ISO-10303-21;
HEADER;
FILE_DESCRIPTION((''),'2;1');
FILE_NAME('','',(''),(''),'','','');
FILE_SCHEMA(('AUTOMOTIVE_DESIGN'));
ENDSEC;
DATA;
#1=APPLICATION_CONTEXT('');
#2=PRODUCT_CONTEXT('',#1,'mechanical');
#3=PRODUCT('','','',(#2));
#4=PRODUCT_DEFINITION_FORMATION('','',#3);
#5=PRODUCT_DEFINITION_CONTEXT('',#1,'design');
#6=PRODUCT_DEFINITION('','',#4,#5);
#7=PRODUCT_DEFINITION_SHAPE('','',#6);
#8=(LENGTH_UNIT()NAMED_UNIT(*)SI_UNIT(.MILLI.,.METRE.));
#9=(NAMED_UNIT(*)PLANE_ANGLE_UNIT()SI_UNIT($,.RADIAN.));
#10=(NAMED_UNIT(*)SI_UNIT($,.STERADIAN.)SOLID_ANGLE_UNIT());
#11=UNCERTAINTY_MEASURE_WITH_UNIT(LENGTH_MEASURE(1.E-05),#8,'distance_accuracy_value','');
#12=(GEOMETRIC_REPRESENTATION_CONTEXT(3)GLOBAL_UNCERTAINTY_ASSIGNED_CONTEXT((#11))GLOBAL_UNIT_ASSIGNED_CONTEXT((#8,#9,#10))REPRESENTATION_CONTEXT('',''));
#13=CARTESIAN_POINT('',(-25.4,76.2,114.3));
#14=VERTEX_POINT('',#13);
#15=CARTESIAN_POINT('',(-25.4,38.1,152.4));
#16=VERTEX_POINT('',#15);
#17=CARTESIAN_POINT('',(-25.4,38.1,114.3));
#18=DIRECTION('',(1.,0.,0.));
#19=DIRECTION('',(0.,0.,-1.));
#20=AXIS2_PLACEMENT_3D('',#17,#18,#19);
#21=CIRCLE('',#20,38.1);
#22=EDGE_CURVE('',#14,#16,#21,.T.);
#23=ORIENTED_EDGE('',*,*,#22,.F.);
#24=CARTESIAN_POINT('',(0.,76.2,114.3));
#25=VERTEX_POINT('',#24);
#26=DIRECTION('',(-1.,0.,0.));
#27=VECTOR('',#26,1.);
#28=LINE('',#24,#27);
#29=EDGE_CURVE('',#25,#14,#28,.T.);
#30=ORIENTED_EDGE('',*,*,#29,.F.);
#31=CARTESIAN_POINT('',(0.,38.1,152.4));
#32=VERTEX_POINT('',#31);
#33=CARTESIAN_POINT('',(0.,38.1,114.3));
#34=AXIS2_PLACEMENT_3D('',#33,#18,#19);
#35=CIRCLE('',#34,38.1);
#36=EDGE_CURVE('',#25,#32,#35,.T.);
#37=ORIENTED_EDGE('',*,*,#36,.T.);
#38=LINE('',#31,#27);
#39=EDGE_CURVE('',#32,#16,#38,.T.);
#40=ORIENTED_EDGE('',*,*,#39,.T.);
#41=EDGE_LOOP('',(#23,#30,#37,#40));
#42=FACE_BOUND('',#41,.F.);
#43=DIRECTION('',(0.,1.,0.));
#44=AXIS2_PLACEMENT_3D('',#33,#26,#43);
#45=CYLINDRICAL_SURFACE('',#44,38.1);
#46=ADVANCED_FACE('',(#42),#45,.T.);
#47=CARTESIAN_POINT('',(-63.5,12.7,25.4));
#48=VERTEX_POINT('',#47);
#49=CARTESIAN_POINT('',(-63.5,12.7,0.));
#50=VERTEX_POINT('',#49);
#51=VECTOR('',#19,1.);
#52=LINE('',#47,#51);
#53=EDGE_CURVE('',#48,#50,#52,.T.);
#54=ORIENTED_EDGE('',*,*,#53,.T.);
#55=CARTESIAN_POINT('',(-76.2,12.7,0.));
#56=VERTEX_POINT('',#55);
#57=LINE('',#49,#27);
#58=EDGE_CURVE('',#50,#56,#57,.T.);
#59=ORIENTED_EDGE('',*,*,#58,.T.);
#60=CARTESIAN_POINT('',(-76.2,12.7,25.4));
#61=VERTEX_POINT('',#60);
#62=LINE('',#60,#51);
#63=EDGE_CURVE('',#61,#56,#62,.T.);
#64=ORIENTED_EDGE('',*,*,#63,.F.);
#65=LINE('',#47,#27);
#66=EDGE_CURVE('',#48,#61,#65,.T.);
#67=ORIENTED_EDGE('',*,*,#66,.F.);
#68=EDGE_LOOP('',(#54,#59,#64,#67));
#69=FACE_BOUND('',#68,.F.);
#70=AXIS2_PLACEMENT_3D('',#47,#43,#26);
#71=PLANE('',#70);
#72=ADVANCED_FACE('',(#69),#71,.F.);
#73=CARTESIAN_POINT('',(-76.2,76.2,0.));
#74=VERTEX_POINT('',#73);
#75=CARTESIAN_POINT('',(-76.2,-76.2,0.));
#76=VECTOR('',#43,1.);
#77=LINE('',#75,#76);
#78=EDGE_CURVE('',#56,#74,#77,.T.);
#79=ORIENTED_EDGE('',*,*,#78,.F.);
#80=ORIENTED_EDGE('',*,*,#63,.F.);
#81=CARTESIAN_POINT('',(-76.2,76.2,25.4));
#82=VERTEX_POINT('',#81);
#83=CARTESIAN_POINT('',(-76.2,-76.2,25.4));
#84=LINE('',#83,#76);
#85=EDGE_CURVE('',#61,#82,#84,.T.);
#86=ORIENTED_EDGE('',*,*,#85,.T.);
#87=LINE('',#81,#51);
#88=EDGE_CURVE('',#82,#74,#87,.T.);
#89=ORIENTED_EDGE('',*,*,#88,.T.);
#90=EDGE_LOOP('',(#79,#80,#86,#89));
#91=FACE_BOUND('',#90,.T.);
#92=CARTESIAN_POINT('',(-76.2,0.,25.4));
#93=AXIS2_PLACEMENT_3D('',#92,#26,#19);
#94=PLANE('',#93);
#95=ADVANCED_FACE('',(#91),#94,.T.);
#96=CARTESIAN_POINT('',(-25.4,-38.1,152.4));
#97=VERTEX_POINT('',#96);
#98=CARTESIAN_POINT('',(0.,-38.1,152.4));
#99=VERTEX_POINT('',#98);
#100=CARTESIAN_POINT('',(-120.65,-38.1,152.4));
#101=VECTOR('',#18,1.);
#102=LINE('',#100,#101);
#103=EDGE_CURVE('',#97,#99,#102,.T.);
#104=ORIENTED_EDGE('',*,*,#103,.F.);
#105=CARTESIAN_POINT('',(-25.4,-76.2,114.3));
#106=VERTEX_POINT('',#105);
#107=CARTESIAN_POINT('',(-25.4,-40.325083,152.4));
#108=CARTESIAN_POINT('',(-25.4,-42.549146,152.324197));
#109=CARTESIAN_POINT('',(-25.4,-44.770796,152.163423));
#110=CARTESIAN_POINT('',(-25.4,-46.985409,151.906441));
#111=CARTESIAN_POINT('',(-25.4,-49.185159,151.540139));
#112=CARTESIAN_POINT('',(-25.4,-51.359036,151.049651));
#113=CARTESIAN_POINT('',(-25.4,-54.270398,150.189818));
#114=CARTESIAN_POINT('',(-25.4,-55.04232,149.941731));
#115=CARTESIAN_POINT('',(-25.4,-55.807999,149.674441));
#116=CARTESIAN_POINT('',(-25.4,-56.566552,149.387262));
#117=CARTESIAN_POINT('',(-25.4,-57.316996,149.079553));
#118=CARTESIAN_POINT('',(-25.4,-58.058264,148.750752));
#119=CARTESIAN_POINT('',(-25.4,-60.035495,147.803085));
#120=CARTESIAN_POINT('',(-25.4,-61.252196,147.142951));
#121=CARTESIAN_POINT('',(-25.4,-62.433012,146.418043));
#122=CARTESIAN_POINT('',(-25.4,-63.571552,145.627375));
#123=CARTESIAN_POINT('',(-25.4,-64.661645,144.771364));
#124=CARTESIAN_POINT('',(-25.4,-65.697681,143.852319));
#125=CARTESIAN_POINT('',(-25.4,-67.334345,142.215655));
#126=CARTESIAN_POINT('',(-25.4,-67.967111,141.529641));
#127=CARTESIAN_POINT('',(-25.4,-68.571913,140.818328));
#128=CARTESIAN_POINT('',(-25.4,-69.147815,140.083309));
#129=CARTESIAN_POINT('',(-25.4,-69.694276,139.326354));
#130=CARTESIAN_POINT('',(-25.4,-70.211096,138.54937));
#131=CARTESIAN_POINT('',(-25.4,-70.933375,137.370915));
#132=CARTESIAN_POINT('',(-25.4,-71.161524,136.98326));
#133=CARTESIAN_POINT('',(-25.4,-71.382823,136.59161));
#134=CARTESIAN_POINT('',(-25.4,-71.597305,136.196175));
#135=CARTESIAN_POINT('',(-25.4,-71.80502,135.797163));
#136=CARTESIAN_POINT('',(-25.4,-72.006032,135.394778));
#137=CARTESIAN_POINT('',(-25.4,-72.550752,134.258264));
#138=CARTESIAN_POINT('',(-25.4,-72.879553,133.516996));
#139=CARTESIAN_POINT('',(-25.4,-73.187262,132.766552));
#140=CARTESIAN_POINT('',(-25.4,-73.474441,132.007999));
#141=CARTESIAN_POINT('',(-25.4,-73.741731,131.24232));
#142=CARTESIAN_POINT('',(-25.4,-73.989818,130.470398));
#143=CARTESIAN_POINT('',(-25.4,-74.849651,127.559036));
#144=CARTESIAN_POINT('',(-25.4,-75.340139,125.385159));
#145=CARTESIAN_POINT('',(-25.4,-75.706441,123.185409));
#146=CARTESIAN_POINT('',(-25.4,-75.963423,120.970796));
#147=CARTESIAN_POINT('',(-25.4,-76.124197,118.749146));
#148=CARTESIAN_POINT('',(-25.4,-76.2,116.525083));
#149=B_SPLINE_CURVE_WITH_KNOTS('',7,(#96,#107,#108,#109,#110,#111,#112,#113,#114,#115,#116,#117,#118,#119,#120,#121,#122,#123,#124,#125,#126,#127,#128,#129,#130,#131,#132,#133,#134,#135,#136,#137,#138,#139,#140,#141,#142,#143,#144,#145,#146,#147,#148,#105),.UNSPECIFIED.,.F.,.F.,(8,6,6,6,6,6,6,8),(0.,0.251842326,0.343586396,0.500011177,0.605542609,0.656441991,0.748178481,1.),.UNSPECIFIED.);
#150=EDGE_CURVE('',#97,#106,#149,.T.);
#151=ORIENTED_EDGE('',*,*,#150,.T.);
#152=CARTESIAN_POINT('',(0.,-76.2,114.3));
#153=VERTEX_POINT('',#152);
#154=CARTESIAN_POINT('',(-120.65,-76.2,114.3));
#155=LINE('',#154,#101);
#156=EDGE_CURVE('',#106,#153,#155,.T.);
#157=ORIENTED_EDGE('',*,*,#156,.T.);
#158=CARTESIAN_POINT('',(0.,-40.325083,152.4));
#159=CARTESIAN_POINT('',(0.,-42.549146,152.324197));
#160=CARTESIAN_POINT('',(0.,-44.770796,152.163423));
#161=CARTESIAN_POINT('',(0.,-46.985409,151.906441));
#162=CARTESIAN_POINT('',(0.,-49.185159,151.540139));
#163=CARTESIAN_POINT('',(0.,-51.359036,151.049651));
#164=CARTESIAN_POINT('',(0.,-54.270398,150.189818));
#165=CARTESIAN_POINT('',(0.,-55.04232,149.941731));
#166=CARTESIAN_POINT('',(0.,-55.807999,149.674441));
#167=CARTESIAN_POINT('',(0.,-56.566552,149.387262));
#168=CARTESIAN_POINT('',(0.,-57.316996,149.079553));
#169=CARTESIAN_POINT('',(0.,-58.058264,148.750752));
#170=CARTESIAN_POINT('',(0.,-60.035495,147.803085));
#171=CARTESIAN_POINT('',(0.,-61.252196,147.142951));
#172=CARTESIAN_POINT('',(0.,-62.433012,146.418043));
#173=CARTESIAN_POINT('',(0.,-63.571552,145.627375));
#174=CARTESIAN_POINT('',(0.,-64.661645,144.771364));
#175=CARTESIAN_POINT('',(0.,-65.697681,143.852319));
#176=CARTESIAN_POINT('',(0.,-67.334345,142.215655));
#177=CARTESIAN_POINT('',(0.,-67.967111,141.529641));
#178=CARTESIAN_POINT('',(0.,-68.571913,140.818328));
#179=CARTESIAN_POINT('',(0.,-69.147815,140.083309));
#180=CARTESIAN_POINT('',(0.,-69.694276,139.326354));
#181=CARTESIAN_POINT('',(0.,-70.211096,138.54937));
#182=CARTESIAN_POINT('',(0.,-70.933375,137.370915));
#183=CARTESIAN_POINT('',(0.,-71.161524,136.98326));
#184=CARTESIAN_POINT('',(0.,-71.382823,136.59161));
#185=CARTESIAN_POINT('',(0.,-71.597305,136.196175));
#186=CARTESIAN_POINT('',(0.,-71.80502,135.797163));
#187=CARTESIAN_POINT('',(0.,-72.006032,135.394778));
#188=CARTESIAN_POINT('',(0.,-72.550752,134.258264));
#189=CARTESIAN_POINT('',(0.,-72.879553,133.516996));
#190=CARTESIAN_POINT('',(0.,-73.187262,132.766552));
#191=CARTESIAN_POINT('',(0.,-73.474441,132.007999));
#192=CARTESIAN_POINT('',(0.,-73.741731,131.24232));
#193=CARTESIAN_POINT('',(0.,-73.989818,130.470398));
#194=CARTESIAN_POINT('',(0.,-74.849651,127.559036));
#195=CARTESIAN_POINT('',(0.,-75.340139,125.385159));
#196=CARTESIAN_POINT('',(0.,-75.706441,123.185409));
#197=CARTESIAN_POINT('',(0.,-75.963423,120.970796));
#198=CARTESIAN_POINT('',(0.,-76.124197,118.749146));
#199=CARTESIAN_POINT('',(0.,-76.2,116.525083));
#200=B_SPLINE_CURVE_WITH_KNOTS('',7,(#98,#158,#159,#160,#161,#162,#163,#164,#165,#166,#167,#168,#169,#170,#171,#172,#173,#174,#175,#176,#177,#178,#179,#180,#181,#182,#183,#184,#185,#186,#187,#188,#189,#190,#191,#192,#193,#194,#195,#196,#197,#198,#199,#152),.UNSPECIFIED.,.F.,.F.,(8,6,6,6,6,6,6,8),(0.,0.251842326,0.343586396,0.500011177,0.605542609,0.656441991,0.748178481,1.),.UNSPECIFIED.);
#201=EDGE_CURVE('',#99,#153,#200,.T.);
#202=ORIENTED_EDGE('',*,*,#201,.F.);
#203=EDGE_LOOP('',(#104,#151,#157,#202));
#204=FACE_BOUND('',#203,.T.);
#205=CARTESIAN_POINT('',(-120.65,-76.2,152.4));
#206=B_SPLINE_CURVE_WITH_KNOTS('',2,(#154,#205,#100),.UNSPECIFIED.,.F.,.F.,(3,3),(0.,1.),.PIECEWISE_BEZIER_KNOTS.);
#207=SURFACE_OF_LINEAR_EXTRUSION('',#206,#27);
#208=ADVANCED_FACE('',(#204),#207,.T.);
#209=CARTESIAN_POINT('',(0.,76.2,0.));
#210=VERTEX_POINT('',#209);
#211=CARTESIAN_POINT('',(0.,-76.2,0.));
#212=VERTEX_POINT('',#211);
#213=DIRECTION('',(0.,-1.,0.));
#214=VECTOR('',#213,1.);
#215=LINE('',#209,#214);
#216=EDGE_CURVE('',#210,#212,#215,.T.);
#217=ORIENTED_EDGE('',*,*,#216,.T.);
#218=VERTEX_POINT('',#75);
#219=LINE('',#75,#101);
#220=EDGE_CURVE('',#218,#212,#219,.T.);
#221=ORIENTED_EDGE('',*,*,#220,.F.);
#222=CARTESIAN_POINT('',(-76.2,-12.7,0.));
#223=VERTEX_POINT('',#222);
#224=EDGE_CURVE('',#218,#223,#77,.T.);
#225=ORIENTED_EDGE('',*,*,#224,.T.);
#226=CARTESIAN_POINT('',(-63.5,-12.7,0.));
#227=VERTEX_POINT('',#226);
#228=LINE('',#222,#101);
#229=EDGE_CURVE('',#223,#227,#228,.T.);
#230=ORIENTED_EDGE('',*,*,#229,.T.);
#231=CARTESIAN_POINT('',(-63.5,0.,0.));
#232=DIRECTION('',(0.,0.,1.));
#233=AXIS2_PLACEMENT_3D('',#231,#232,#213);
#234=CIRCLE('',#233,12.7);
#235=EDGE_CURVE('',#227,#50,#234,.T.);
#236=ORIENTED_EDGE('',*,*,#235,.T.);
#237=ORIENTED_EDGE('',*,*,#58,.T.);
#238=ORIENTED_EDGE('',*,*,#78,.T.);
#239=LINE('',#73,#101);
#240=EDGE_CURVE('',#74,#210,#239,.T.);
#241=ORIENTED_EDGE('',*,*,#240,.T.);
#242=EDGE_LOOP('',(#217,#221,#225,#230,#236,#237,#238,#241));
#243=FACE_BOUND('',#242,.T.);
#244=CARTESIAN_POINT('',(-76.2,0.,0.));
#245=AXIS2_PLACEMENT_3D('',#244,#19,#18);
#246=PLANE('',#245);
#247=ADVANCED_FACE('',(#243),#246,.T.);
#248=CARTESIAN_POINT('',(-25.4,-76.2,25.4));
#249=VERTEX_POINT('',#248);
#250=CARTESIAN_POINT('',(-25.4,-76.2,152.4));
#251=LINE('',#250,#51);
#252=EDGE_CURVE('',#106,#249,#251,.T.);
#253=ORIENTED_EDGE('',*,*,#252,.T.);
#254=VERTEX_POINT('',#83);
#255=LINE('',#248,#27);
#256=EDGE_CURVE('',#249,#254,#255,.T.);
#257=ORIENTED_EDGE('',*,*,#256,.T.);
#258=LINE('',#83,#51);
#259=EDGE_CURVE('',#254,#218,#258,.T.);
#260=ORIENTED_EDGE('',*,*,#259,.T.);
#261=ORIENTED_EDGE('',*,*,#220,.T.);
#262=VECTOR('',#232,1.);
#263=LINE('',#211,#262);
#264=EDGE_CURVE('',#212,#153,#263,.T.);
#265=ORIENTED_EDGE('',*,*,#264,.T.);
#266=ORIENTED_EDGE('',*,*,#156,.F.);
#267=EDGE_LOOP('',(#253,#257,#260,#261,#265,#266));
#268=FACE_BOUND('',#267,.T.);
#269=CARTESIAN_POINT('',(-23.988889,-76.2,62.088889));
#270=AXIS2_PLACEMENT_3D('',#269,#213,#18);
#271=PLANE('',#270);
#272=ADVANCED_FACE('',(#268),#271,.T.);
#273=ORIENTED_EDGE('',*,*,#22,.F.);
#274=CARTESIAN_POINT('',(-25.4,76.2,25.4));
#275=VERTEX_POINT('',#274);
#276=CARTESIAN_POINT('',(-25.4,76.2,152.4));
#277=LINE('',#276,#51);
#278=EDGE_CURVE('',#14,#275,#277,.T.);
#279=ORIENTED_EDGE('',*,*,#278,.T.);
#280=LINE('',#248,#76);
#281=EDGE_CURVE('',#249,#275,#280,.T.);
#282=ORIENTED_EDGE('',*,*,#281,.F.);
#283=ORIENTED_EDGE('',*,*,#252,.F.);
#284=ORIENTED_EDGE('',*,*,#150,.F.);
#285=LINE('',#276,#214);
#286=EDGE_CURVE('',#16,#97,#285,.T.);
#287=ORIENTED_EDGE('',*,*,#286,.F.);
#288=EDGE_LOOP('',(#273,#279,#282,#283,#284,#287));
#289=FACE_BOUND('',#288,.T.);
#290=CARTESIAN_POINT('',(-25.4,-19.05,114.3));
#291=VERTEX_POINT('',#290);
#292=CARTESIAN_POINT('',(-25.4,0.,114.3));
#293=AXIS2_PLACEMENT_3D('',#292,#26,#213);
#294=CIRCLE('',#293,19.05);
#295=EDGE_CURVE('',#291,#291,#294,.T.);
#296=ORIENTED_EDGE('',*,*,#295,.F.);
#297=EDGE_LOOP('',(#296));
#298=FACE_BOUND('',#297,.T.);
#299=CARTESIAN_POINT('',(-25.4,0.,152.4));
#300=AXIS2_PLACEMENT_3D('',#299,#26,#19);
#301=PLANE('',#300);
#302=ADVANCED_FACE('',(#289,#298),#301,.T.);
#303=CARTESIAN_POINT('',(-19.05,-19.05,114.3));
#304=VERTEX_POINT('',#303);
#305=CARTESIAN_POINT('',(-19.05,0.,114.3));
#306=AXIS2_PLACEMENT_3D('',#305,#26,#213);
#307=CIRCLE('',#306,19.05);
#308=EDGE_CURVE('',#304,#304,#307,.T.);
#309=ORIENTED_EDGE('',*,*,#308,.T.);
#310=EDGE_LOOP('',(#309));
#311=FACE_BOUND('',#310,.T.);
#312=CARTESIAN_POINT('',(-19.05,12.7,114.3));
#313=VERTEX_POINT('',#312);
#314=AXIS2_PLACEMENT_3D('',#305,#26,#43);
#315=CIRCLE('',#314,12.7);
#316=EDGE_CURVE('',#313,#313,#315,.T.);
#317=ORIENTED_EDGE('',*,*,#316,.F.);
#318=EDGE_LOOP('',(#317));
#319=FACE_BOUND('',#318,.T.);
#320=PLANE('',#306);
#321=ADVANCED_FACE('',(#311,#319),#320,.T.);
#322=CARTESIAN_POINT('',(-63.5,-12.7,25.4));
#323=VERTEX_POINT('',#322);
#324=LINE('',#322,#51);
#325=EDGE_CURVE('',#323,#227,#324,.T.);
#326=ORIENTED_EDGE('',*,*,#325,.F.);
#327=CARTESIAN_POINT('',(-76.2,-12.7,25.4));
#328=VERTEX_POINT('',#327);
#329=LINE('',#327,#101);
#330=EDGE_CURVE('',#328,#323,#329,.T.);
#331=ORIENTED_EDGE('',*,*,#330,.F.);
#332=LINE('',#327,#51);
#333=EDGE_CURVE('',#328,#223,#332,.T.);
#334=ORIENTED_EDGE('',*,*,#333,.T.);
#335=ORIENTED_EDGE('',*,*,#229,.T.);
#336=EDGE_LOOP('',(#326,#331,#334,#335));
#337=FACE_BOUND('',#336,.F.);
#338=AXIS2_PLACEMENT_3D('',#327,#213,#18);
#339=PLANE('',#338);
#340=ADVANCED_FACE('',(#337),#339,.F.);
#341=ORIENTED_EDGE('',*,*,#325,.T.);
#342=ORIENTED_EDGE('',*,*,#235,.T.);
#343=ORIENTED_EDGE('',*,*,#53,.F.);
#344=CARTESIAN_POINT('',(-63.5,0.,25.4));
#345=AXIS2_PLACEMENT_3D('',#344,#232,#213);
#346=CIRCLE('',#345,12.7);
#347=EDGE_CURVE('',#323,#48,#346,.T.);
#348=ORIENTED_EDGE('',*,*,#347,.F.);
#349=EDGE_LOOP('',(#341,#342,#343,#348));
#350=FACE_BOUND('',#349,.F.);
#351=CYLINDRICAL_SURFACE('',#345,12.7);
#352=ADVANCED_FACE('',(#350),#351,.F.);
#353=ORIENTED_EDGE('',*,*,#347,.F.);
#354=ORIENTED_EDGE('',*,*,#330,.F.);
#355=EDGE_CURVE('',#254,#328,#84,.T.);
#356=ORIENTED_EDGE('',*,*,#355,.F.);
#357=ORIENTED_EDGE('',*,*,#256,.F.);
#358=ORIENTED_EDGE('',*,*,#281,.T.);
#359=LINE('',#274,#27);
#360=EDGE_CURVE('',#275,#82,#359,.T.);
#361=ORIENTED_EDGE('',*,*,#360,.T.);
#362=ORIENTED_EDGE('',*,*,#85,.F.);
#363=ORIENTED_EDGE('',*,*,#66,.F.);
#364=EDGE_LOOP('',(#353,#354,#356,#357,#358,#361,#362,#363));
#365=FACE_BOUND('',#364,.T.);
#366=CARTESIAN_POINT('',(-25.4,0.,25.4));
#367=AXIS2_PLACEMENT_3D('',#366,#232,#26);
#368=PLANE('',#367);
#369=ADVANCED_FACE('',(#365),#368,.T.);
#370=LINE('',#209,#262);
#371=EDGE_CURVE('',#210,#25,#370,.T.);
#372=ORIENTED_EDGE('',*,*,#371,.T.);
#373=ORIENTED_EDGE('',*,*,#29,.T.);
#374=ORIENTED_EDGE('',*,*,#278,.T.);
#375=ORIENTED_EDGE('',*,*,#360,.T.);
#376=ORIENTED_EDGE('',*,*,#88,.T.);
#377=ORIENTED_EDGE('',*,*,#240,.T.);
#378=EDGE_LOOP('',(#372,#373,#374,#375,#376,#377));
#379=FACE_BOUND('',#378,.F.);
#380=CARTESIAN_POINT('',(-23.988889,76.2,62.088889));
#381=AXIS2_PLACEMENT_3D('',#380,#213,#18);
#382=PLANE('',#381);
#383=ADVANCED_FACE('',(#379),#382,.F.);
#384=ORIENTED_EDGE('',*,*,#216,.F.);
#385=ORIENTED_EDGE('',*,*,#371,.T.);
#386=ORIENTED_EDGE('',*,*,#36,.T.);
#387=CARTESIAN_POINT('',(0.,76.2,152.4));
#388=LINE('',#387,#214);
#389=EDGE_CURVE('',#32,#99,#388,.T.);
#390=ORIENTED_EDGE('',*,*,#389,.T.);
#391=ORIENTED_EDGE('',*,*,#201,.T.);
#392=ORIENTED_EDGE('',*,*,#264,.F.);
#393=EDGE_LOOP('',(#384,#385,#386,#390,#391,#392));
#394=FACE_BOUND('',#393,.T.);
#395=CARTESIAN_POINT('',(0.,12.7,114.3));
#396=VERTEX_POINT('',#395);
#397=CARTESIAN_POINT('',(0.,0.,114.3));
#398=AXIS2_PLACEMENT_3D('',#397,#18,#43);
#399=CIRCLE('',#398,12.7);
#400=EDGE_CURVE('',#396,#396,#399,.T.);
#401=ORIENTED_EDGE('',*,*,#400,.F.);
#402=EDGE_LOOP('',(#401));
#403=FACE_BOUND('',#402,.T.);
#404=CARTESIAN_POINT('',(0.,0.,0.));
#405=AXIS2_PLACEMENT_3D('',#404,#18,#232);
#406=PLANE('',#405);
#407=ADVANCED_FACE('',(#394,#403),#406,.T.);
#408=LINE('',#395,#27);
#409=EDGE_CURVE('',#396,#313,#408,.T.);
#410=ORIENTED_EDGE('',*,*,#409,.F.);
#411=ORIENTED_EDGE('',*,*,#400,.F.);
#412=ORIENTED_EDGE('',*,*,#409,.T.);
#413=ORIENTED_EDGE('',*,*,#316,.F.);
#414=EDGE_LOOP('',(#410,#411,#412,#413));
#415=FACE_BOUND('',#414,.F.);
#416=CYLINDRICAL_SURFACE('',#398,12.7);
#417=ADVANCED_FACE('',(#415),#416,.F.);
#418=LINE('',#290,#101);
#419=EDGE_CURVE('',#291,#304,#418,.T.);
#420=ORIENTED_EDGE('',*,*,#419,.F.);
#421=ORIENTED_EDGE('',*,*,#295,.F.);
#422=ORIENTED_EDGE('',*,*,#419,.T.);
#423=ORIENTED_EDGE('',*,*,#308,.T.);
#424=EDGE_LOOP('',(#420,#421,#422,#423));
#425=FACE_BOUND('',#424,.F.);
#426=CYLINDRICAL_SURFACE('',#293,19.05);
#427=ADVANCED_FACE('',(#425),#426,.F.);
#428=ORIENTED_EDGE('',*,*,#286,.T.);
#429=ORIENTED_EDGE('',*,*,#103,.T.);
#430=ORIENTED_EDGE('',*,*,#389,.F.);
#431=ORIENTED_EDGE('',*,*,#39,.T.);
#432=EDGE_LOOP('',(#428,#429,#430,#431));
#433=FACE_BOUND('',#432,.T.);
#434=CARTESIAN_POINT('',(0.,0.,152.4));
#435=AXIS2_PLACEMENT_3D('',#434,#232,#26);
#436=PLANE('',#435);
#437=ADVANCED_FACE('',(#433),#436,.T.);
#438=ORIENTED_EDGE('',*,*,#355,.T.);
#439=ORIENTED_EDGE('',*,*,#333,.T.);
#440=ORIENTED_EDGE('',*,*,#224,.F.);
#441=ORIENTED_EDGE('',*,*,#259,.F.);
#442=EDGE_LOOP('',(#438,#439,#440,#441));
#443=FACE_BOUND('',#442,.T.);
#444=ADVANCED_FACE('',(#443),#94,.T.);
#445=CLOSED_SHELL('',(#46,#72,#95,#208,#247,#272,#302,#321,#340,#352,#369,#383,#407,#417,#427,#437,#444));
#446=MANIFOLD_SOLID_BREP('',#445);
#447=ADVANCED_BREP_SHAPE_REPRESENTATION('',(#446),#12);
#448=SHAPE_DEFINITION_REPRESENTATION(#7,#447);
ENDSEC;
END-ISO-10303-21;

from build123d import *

# Parameters (mm, degrees)
F1_DEPTH    = 76.2
F2_R        = 12.7
F3_DEPTH    = 38.1
F5_DEPTH    = 25.4
F6_T1_DEPTH = 215.9
F7_R        = 38.1
F8_R        = 19.05
F8_R_2      = 12.7
F9_DEPTH    = 6.35


# Not quite as in the source:
# - a fillet or chamfer that OpenCascade refuses, or shapes differently, is made with other operations: its cross-section is extruded or revolved along the edge and cut away or added


with BuildPart() as f1:
    # F0 (on Front) → F1 (new body, symmetric)
    with BuildSketch(Plane.XZ):
        Polygon((-76.2, 0), (0, 0), (0, 152.4), (-25.4, 152.4), (-25.4, 25.4), (-76.2, 25.4), align=None)
    extrude(amount=F1_DEPTH, both=True)

    # F2 (on face) → F3 (cut)
    with BuildSketch(Plane.YZ):
        with Locations((0, 114.3)):
            Circle(F2_R)
    extrude(amount=-F3_DEPTH, mode=Mode.SUBTRACT)

    # F4 (on face) → F5 (cut)
    with BuildSketch(Plane.XY.offset(25.4)):
        with BuildLine():
            Line((-63.5, 12.7), (-76.2, 12.7))
            Line((-76.2, 12.7), (-76.2, -12.7))
            Line((-76.2, -12.7), (-63.5, -12.7))
            ThreePointArc((-63.5, -12.7), (-50.8, 0), (-63.5, 12.7))
        make_face()
    extrude(amount=-F5_DEPTH, mode=Mode.SUBTRACT)

    # F6: fillet of radius 38.1 on 1 edges, made by hand

    # F6_s2 → F6_t1 (cut)
    with BuildSketch(Plane.YZ.offset(-120.65)):
        with BuildLine():
            add(Edge.make_bspline(
                [(-76.2, 114.3), (-76.2, 152.4), (-38.1, 152.4)],
                knots=[0, 0, 0, 1, 1, 1], degree=2, weights=[1, 1, 1]))
            Line((-38.1, 152.4), (-76.2, 152.4))
            Line((-76.2, 152.4), (-76.2, 114.3))
        make_face()
    extrude(amount=F6_T1_DEPTH, mode=Mode.SUBTRACT)

    # F7
    f7_edges = [f1.edges().sort_by_distance(p)[0] for p in [
        (-12.7, 76.2, 152.4),
    ]]
    fillet(f7_edges, radius=F7_R)

    # F8 (on face) → F9 (cut)
    with BuildSketch(Plane(origin=(-25.4, 0, 0), x_dir=(0, -1, 0), z_dir=(-1, 0, 0))):
        with Locations((0, 114.3)):
            Circle(F8_R)
        with Locations((0, 114.3)):
            Circle(F8_R_2, mode=Mode.SUBTRACT)
    extrude(amount=-F9_DEPTH, mode=Mode.SUBTRACT)


solid = f1.part
